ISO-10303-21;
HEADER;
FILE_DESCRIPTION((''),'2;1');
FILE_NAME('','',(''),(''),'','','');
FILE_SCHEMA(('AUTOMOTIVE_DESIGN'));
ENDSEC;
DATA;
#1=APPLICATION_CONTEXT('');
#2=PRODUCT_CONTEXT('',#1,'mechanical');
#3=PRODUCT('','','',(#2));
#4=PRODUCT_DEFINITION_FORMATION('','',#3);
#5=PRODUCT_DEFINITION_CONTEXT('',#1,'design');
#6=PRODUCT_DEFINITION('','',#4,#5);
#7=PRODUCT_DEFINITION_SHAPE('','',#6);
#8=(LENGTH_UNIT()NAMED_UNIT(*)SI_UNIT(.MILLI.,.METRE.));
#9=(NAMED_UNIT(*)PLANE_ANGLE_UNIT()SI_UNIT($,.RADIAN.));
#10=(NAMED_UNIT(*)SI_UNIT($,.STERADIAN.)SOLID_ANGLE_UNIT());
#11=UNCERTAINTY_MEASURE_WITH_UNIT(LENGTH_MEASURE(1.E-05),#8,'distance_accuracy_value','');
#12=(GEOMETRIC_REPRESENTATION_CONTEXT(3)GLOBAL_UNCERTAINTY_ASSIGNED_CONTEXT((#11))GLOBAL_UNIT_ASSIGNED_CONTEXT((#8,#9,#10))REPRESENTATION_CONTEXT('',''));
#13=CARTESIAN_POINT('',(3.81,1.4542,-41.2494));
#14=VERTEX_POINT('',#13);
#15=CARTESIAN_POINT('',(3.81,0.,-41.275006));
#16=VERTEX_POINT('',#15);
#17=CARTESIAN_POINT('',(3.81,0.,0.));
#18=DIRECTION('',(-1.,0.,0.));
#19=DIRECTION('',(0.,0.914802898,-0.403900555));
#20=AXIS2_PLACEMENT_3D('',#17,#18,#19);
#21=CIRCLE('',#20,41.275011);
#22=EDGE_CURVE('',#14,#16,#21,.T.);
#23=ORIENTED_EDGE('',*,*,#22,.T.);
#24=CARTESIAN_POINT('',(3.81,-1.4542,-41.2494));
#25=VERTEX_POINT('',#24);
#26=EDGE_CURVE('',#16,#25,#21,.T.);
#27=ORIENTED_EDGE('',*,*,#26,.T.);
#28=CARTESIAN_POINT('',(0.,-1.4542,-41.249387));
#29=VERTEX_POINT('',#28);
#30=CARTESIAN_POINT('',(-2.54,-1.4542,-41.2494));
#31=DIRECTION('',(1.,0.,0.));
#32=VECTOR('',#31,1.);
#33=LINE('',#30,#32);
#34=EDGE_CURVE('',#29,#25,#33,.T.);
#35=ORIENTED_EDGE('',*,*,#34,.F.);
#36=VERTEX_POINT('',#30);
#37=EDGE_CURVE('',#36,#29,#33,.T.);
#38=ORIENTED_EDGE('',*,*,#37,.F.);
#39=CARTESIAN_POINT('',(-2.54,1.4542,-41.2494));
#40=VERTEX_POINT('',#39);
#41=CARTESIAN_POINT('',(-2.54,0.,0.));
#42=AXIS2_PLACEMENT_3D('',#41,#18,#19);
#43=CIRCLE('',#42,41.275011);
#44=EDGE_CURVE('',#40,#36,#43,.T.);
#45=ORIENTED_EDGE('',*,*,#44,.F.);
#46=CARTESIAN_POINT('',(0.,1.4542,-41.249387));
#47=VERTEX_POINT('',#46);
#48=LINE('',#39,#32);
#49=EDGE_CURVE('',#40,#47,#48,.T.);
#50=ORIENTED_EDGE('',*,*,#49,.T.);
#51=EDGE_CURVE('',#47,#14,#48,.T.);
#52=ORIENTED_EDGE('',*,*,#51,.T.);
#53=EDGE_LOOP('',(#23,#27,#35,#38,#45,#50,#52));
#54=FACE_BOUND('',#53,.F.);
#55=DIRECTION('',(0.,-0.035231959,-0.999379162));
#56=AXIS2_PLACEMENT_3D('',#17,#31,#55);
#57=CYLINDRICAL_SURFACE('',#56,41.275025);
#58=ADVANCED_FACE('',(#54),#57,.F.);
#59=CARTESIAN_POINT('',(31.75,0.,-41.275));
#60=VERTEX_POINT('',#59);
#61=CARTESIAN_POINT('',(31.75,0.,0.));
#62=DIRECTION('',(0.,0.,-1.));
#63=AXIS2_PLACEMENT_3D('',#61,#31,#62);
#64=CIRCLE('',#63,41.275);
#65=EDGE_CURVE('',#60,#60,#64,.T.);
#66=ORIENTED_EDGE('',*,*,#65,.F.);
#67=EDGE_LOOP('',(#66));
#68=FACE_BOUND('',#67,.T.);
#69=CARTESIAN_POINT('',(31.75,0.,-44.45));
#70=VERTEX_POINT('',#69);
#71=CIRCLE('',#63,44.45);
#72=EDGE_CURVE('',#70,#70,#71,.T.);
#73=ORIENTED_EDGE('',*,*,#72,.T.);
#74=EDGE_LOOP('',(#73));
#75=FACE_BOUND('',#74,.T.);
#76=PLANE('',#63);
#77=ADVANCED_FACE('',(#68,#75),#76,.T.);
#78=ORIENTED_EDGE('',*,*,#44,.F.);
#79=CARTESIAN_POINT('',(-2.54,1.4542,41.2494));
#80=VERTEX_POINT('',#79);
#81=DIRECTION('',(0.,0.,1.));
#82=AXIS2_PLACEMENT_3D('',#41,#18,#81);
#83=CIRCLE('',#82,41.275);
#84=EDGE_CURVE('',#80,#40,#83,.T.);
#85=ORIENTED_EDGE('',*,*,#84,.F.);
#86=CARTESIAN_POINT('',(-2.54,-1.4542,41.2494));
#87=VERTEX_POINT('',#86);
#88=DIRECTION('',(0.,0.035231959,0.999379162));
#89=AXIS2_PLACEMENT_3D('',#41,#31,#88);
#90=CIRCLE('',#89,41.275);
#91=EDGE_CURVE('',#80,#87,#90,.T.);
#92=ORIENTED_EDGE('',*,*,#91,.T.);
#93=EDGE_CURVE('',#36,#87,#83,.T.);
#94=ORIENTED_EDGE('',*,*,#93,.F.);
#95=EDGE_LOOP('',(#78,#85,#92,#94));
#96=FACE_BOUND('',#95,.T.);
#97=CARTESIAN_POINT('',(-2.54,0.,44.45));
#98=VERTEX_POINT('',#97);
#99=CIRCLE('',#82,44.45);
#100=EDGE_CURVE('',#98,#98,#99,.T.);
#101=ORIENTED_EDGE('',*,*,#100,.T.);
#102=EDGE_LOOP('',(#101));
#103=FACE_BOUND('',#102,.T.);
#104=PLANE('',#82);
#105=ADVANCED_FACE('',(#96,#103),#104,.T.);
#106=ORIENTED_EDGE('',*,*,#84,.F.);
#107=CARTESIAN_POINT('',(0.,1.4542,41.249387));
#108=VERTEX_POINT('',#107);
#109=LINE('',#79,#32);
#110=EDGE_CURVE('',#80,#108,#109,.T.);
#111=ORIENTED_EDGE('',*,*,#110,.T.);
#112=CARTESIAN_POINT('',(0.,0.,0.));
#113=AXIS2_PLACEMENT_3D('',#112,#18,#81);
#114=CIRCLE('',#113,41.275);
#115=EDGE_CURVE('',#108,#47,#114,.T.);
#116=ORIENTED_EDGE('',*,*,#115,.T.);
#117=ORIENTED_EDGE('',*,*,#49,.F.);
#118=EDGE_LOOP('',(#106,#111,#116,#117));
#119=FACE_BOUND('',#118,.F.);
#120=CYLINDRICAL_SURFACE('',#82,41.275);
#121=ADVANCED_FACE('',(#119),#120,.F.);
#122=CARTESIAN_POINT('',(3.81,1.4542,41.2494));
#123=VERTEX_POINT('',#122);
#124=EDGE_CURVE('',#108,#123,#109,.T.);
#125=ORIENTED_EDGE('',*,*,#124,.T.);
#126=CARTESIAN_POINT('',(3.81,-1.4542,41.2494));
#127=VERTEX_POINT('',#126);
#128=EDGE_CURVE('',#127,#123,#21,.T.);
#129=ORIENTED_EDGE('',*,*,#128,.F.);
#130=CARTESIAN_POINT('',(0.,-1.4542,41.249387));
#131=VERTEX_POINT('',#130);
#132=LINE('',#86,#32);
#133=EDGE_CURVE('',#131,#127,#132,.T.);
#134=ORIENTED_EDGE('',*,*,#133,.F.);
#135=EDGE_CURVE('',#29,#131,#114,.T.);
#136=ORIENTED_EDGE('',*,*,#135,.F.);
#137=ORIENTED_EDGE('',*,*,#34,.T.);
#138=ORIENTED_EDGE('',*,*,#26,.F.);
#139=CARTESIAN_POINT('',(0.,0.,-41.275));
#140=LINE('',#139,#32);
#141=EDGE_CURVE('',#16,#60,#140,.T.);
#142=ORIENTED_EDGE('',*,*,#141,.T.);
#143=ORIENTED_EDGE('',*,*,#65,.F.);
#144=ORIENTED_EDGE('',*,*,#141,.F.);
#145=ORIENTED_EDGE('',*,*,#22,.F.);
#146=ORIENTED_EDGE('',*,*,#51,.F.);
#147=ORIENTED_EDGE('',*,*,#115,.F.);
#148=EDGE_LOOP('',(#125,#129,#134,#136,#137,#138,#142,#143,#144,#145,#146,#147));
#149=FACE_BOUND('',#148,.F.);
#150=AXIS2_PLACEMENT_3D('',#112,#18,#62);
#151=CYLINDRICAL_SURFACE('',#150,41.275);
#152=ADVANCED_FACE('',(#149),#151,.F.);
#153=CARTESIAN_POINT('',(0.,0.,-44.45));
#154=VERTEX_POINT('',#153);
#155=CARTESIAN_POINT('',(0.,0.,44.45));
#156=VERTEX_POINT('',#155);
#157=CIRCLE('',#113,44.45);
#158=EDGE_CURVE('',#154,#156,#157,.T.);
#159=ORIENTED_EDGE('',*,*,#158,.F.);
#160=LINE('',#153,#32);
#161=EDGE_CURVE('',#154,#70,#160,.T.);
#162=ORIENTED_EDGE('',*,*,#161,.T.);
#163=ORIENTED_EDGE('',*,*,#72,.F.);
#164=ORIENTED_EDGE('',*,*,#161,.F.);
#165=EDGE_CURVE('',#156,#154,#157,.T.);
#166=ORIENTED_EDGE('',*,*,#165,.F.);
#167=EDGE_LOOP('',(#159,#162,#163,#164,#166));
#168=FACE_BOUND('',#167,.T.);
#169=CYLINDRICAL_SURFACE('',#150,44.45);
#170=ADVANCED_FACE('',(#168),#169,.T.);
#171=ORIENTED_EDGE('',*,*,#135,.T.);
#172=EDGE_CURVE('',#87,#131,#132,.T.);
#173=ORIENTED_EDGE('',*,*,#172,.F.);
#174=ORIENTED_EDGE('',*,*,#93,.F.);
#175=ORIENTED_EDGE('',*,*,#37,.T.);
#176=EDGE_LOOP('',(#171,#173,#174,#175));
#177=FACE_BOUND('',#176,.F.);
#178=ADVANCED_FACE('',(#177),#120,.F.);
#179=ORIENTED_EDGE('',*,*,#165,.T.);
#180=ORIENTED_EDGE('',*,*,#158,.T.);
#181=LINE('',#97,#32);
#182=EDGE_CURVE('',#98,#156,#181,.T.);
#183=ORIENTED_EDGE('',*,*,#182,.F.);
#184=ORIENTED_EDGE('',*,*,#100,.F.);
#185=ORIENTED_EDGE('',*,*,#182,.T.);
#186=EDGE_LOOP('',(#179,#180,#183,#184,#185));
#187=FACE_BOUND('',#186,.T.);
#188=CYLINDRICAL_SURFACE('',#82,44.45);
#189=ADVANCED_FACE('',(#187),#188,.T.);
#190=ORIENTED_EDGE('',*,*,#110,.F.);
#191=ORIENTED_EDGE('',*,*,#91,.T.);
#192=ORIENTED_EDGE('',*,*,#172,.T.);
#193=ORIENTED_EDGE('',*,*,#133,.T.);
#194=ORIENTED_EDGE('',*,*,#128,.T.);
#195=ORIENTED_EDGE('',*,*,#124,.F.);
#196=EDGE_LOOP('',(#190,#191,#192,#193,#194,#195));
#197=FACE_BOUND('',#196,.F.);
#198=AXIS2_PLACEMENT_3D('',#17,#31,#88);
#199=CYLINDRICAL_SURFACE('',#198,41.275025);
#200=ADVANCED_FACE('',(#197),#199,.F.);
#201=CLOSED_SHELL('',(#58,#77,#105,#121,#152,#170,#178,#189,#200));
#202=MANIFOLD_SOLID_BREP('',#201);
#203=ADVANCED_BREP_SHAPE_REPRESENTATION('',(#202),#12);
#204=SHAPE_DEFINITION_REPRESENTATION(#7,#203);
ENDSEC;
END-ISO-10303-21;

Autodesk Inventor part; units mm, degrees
ref_plane "YZ Plane" through (0, 0, 0) normal (1, 0, 0) x (0, 1, 0)
ref_plane "XZ Plane" through (0, 0, 0) normal (0, 1, 0) x (-1, 0, 0)
ref_plane "XY Plane" through (0, 0, 0) normal (0, 0, 1) x (1, 0, 0)
ref_plane "Work Plane13" through (-2.54, 44.7855, -14.3129) normal (0, -1, 0) x (1, 0, 0)
sketch "Sketch6" plane through (-2.54, 44.7855, -14.3129) normal (0, -1, 0) x (1, 0, 0)
  line L0 (6.35, 32.4159) -> (26.9875, 32.4159) projected
  line L1 (13.4874, 32.4159) -> (13.4874, 26.0989)
  line L2 (26.9875, 32.4159) -> (26.9875, -3.9117) projected
  point P0 (2.54, 14.3129)
  dimension "d20" = 13.5001
ref_plane "Work Plane14" through (-2.54, 0, 0) normal (-1, 0, 0) x (0, 0, 1)
sketch "Sketch15" plane through (-2.54, 0, 0) normal (-1, 0, 0) x (0, 0, 1)
  circle A0 centre (0, 0) radius 41.275
  circle A1 centre (0, 0) radius 44.45
  dimension "d47" = 82.55
  dimension "d48" = 88.9
extrude "Extrusion11" add sketch "Sketch15" against normal blind 2.54
ref_plane "Work Plane10" through (0, 0, 0) normal (1, 0, 0) x (0, 0, -1)
sketch "Sketch16" plane through (0, 0, 0) normal (1, 0, 0) x (0, 0, -1)
  circle A0 centre (0, 0) radius 44.45
  circle A1 centre (0, 0) radius 41.275
  dimension "d51" = 82.55
extrude "Extrusion12" add sketch "Sketch16" along normal blind 31.75
ref_plane "Work Plane9" through (-2.54, 0, 0) normal (-1, 0, 0) x (0, 0, 1)
sketch "Sketch19" plane through (-2.54, 0, 0) normal (-1, 0, 0) x (0, 0, 1)
  line L0 (4.3346, 1.4542) -> (-4.3346, 1.4542) projected
  arc A0 (-16.671, 37.7585) -> (16.671, 37.7585) centre (0, 0) ccw projected
  line L1 (-4.3346, 1.4542) -> (-41.2494, 1.4542)
  line L2 (4.3346, 1.4542) -> (41.2494, 1.4542)
  circle A1 centre (0, 0) radius 8.382
  line L3 (-4.3346, -1.4542) -> (4.3346, -1.4542)
  line L4 (4.3346, 1.4542) -> (-4.3346, 1.4542)
  line L5 (-41.2494, -1.4542) -> (41.2494, -1.4542)
extrude "Extrusion14" add sketch "Sketch19" against normal blind 6.35 contours L2 A1 L5 L3 L1 L0 | L2 A0 L5 A1 | A1 L5 A0 L1
sketch "Sketch20" plane through (3.81, 0, 0) normal (1, 0, 0) x (0, 0, -1)
  line L0 (41.2494, 1.4542) -> (-41.2494, 1.4542) projected
  line L1 (-41.2494, -1.4542) -> (41.2494, -1.4542) projected
  arc A0 (-41.2494, 1.4542) -> (-41.2494, -1.4542) centre (0, 0) ccw projected
  arc A1 (41.2494, -1.4542) -> (41.2494, 1.4542) centre (0, 0) ccw projected
extrude "Extrusion15" cut sketch "Sketch20" against normal blind 6.35
ref_plane "Work Plane12" through (-2.54, 0, 0) normal (-1, 0, 0) x (0, 0, 1)
ref_plane "Work Plane11" through (3.81, 0, 0) normal (1, 0, 0) x (0, 0, -1)
properties part number "LiftMotorHousingBottom[FINAL]"
